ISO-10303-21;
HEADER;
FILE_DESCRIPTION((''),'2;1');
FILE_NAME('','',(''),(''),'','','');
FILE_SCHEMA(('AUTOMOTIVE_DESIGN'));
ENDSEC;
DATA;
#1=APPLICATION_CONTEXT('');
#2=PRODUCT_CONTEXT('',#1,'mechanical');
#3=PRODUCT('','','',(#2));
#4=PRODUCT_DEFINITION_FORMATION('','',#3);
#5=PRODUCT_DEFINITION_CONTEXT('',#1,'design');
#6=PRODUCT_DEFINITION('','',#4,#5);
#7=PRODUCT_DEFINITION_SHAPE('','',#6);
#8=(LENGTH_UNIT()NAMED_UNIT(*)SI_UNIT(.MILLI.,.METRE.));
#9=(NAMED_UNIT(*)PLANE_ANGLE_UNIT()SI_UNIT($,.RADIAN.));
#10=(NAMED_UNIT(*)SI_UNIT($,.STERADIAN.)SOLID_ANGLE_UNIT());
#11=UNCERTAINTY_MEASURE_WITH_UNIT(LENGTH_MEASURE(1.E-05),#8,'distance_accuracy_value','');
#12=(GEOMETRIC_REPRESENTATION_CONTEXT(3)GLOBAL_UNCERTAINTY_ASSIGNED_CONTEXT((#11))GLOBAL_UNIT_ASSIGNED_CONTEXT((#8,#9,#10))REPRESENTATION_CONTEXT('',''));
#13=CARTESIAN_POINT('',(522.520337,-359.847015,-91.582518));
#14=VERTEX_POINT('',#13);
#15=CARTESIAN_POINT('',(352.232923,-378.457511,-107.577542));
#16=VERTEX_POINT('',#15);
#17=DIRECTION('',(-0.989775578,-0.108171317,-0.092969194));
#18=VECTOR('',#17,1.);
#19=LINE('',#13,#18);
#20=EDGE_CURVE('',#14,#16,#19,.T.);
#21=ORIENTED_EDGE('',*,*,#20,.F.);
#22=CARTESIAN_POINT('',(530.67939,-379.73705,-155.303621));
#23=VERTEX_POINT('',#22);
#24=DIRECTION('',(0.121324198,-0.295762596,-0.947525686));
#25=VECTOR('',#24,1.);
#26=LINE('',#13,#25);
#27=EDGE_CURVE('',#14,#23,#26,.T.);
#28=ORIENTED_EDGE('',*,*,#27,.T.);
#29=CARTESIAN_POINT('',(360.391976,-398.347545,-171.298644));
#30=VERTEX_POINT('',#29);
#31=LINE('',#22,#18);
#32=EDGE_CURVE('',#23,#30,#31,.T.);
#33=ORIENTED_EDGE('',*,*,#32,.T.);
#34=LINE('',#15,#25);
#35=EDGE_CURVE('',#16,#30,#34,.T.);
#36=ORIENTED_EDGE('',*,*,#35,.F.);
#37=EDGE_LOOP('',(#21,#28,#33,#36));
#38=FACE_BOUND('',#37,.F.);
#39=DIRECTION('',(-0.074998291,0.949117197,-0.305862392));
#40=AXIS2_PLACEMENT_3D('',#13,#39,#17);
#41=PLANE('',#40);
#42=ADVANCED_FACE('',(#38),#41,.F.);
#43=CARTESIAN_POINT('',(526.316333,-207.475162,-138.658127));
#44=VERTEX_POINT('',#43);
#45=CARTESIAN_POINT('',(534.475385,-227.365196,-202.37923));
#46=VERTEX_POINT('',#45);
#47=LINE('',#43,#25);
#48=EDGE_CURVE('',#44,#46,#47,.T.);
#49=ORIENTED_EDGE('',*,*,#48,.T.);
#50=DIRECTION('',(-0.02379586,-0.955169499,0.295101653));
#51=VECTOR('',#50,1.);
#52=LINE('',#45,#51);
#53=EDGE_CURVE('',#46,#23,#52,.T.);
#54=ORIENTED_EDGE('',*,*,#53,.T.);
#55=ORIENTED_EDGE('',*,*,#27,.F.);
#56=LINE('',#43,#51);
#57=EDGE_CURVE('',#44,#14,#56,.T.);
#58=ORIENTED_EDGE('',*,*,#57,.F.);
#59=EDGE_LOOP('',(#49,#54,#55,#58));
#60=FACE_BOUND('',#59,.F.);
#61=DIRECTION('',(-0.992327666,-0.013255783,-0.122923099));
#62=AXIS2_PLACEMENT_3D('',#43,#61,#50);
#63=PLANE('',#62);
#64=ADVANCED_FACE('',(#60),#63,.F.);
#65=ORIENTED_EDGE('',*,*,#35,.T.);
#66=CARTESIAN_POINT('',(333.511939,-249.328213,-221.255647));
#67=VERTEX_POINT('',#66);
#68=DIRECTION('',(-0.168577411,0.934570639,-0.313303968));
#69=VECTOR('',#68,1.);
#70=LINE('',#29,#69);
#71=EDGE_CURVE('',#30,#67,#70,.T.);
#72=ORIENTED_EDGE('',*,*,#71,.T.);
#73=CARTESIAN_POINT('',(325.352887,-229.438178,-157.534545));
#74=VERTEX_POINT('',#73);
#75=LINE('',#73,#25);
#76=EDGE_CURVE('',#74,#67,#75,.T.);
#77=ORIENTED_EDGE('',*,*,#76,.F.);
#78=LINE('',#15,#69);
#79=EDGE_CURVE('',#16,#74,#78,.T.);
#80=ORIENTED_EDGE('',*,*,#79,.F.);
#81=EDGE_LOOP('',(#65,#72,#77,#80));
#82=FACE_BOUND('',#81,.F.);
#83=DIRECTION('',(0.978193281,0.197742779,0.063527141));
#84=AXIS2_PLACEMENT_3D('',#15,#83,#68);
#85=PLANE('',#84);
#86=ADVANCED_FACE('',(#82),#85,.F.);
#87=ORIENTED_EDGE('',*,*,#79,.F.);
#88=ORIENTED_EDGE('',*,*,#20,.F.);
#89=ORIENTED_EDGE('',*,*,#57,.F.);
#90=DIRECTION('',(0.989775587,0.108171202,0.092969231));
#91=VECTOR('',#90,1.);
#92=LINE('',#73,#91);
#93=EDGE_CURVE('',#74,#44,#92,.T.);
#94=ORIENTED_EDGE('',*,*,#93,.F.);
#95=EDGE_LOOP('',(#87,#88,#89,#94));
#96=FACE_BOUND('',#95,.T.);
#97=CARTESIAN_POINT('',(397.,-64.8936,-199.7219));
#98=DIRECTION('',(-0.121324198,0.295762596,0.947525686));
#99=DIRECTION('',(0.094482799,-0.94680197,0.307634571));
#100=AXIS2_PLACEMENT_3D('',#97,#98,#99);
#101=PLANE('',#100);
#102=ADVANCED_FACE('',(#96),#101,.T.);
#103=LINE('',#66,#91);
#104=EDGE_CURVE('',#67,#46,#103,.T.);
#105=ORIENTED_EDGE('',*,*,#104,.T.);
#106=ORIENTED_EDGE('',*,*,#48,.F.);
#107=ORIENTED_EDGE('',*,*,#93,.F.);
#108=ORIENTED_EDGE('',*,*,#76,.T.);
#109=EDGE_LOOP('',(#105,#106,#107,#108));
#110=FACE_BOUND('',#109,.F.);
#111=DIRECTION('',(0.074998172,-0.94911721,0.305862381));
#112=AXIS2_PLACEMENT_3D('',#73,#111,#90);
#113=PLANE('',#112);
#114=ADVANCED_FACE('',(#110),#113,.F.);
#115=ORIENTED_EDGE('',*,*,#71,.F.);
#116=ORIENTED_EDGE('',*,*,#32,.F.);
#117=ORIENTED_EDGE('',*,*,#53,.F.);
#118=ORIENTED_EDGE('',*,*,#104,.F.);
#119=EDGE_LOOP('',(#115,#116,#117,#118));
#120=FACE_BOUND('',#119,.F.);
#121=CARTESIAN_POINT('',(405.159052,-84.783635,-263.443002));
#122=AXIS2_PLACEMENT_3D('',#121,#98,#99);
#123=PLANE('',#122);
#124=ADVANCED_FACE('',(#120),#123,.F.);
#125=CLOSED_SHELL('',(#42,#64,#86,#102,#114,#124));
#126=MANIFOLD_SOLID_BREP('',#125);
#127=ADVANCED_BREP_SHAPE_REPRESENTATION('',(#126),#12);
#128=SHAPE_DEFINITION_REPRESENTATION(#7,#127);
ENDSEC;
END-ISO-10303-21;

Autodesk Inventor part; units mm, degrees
ref_plane "Work Plane2" through (0, -64.8936, -199.7219) normal (0, 0.309017, 0.9510565) x (1, 0, 0)
ref_plane "Work Plane1" through (0, 0, 0) normal (0, 0.309017, 0.9510565) x (1, 0, 0)
sketch "Sketch1" plane through (0, -64.8936, -199.7219) normal (0, 0.309017, 0.9510565) x (1, 0, 0)
  line L0 (397, 0) -> (438, -432)
  point P0 (0, 0)
ref_plane "Work Plane3" through (397, -64.8936, -199.7219) normal (-0.1213242, 0.2957626, 0.9475257) x (0.0944828, -0.946802, 0.3076346)
sketch "Sketch2" plane through (397, -64.8936, -199.7219) normal (-0.1213242, 0.2957626, 0.9475257) x (0.0944828, -0.946802, 0.3076346)
  line L0 (166, 115) -> (324.3894, 96.0131)
  line L1 (324.3894, 96.0131) -> (321, -76)
  line L2 (321, -76) -> (162, -88)
  line L3 (162, -88) -> (166, 115)
  point P0 (-37.5097, -366.6855)
extrude "Extrusion1" add sketch "Sketch2" against normal blind 67.25
properties part number "WaveRunnerFootPedal"
